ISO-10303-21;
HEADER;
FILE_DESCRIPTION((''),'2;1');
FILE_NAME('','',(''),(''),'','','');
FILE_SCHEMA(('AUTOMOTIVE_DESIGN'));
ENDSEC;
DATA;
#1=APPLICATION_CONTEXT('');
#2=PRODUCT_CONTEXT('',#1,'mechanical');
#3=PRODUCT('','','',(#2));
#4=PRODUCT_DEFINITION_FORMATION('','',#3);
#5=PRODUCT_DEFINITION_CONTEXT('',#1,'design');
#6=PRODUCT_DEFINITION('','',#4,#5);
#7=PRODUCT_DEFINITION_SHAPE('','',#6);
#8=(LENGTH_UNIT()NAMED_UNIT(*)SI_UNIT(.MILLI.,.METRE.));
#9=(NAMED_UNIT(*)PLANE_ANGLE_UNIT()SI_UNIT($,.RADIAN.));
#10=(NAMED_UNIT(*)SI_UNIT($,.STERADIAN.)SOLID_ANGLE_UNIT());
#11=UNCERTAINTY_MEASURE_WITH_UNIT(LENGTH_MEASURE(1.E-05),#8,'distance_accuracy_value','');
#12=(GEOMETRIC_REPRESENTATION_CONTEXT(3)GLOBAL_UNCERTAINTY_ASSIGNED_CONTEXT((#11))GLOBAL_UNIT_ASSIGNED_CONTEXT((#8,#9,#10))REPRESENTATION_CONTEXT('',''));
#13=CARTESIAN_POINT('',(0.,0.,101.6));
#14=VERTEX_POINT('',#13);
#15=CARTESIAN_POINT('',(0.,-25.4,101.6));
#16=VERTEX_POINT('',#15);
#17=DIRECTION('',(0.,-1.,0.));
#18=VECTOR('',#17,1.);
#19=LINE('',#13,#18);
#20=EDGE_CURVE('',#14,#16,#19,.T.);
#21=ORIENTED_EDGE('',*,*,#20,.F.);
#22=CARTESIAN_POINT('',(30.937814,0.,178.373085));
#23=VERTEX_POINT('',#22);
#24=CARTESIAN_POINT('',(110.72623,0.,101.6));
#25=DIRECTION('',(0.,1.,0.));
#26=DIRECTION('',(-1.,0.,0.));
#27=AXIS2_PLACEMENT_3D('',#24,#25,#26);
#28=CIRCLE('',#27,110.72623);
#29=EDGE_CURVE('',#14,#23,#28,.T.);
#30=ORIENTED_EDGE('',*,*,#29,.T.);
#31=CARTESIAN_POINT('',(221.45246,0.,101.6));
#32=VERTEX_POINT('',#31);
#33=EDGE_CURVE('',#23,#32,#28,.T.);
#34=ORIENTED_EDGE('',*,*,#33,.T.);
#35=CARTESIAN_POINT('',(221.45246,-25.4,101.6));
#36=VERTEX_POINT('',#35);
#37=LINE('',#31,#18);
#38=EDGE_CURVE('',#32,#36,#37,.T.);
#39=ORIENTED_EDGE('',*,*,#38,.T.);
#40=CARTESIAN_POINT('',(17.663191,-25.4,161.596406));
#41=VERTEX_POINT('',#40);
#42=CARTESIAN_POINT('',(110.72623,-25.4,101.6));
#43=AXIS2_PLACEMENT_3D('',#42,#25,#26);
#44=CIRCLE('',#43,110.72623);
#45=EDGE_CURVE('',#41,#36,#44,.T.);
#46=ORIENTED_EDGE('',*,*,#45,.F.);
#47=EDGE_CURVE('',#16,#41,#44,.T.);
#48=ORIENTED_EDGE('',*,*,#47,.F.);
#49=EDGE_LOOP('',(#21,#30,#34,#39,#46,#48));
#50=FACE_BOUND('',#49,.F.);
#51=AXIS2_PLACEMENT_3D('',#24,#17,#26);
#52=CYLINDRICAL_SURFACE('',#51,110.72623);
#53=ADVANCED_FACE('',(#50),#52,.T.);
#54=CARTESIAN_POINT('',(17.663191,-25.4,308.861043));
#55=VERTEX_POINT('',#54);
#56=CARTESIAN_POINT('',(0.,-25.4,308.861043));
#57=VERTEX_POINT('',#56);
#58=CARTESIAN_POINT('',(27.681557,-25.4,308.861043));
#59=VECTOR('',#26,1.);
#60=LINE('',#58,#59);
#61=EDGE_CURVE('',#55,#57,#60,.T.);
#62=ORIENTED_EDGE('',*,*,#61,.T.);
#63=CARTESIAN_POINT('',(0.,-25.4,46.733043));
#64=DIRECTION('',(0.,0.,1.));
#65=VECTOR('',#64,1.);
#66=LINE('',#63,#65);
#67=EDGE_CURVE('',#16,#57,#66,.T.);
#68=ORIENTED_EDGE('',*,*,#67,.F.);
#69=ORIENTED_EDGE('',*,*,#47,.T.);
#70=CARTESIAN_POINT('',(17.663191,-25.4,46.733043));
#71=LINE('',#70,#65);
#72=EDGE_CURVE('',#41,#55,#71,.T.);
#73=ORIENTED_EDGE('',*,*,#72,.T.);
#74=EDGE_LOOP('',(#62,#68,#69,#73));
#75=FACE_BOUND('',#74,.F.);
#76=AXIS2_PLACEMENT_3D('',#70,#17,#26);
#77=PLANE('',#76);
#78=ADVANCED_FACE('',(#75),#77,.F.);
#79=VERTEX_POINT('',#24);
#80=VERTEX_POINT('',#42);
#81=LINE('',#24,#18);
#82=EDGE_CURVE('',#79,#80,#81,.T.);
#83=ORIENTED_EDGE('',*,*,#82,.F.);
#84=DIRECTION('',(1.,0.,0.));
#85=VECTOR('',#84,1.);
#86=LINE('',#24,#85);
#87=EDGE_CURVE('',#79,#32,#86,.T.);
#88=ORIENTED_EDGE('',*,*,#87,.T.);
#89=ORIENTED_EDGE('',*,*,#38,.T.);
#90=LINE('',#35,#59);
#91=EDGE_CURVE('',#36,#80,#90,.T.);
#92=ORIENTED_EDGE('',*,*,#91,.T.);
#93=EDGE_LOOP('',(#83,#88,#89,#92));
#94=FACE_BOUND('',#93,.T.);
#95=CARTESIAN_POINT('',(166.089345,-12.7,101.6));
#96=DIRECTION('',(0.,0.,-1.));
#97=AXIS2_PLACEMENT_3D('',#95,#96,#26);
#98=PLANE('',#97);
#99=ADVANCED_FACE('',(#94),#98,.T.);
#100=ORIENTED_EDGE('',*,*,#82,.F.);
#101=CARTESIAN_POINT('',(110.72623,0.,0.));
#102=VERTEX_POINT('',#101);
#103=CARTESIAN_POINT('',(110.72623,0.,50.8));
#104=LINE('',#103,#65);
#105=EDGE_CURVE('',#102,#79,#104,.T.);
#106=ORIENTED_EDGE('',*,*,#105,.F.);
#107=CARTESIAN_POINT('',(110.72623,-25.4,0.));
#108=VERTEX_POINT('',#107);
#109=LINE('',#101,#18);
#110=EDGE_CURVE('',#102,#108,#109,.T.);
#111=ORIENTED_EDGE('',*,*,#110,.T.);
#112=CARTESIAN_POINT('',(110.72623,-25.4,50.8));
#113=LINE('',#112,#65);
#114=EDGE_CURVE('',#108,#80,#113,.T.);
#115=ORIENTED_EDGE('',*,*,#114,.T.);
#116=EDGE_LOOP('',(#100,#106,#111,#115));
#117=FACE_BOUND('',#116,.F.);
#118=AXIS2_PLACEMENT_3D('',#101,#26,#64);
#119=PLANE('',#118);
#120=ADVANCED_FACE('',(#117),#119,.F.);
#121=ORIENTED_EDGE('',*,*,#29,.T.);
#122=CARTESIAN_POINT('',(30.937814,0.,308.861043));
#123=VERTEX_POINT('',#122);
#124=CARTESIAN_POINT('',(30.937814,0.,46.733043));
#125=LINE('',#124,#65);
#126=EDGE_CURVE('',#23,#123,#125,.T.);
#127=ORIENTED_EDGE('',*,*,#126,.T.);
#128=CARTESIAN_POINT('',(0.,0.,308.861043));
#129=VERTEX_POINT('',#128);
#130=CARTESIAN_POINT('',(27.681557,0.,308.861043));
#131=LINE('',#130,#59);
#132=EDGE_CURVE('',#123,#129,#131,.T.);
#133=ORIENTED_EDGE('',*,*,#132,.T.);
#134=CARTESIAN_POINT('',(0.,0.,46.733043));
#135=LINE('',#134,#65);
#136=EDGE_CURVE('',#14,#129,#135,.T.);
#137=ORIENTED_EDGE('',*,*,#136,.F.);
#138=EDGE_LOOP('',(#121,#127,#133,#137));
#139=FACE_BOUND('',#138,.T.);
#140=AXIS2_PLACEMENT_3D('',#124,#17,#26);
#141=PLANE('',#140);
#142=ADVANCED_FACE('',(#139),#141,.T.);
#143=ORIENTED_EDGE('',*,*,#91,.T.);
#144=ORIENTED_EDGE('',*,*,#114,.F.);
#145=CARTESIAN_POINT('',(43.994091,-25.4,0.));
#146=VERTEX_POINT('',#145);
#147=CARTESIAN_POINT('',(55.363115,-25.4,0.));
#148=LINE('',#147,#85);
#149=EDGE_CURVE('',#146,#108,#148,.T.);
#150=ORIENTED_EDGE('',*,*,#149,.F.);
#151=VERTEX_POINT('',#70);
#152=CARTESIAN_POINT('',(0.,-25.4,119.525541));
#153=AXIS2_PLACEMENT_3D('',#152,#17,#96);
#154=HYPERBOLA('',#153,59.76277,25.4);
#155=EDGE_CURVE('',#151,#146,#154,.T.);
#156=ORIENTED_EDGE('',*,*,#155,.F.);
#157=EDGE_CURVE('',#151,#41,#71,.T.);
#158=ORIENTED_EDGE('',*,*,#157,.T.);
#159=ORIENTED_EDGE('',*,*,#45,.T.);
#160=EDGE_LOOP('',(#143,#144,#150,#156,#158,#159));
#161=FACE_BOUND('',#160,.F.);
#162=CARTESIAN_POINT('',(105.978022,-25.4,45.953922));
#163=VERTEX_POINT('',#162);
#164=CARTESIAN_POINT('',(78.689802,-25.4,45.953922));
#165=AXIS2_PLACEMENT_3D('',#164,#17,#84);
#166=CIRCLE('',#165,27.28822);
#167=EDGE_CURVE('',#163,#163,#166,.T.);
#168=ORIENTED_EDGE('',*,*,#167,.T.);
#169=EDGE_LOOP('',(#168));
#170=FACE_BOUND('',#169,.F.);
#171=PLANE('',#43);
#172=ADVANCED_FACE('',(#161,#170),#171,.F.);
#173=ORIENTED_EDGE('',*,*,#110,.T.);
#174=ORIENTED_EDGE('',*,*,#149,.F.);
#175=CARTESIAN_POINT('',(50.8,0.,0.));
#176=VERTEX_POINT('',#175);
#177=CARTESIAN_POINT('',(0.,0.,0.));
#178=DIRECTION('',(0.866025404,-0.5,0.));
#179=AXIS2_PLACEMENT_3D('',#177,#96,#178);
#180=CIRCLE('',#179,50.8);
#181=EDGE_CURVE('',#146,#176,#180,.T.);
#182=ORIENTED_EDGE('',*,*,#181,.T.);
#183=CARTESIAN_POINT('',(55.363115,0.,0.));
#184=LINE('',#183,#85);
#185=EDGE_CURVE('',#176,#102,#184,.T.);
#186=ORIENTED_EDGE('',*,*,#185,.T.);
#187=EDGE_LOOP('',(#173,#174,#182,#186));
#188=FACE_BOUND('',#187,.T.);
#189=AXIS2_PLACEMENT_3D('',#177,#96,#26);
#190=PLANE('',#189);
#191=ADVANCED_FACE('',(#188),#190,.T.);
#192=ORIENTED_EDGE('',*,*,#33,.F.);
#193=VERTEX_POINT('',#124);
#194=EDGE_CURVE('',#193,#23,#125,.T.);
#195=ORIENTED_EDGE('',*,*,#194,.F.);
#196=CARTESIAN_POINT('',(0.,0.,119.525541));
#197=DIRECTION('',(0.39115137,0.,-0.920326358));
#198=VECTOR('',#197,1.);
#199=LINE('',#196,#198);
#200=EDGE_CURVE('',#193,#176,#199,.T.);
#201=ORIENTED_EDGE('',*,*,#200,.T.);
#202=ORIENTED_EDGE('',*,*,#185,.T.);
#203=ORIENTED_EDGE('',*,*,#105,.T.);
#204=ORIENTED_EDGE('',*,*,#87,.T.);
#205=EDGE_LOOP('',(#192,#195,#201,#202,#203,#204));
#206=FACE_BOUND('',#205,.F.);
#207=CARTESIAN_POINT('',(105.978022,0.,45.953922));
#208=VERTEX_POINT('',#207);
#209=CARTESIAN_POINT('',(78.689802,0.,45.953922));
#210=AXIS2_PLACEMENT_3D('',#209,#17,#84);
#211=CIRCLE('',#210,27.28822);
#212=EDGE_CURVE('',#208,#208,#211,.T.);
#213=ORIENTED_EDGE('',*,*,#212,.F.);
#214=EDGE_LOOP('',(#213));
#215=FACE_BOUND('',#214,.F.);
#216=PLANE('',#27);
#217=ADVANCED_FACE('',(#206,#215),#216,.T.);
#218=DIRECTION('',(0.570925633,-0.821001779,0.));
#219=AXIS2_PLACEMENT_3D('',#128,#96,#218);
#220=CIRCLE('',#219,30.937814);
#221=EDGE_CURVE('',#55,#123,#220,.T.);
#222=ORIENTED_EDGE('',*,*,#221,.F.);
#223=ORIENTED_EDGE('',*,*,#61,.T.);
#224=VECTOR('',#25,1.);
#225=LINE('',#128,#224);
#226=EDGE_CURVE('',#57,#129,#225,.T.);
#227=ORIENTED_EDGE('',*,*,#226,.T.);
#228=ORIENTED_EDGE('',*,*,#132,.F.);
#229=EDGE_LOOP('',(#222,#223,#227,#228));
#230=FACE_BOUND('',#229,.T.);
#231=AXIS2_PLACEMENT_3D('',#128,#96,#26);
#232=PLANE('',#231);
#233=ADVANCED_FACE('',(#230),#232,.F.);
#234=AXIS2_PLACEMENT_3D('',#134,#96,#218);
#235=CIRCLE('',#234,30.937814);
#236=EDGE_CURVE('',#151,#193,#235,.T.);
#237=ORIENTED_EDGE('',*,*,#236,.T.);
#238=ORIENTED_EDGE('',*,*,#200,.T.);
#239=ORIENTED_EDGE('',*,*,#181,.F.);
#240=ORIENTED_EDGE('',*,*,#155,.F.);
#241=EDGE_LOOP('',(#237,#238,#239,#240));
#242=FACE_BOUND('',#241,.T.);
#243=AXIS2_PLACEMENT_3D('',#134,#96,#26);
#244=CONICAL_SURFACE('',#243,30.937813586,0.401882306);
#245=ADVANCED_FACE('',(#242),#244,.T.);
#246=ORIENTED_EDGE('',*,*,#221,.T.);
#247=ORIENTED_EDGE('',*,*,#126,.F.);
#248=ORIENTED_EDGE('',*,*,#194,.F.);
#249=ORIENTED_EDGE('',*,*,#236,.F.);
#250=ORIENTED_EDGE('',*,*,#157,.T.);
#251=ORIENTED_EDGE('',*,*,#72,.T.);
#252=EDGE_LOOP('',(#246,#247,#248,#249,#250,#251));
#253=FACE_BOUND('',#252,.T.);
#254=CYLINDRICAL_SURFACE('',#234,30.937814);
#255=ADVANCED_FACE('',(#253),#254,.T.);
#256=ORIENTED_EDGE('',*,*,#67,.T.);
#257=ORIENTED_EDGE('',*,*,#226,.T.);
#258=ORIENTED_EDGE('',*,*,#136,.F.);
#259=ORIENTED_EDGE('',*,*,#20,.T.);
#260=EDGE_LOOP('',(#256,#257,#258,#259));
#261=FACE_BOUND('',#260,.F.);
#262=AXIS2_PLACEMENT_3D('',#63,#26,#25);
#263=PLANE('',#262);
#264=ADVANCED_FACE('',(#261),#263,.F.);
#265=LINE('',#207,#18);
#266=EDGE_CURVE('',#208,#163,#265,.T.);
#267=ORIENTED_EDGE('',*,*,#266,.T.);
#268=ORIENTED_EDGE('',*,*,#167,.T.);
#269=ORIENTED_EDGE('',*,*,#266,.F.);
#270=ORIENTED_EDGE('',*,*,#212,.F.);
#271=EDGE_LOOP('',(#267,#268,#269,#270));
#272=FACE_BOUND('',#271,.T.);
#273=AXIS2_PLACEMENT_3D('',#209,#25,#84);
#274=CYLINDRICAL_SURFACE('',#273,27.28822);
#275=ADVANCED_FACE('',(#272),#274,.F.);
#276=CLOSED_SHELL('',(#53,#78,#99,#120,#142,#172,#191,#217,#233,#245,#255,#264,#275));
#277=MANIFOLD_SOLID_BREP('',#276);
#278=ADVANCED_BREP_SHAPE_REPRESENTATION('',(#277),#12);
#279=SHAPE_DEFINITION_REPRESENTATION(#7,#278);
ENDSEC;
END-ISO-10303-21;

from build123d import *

# Parameters (mm, degrees)
F0_W     = 110.7262298465
F0_H     = 101.6
F0_R     = 27.2882199073
F1_DEPTH = 25.4
F4_DEPTH = 262.128
F5_ANGLE = 180


with BuildPart() as f1:
    # F0 (on Front) → F1 (new body)
    with BuildSketch(Plane.XZ):
        with Locations((55.3631149232, 50.8)):
            Rectangle(F0_W, F0_H)
        with Locations((78.689802438, 45.9539219737)):
            Circle(F0_R, mode=Mode.SUBTRACT)
    extrude(amount=F1_DEPTH)

    # F2 (on Front) → F3 (revolve)
    with BuildSketch(Plane.XZ):
        Polygon((-50.8, 0), (0, 0), (0, 46.7330427111), (-30.9378135865, 46.7330427111), align=None)
    revolve(axis=Axis((0, 0, 23.3665213556), (0, 0, -1)))

    # F4 (add): a face of the model
    f4_faces = [f1.faces().sort_by_distance(p)[0] for p in [
        (-4.0593514792, 3.4603008855, 46.7330427111),
    ]]
    extrude(f4_faces, amount=F4_DEPTH)

    # F1_face (on face) → F5 (revolve)
    with BuildSketch(Plane(origin=(55.3631149232, -12.7, 101.6), x_dir=(1, 0, 0), z_dir=(0, 0, 1))):
        Polygon((55.3631149232, -12.7), (55.3631149232, 12.7), (-24.4253013368, 12.7), (-55.3631149232, 12.7), (-55.3631149232, -12.7), (-37.6999241155, -12.7), align=None)
    revolve(axis=Axis((110.7262298465, -12.7, 101.6), (0, 1, 0)), revolution_arc=F5_ANGLE)


solid = f1.part
